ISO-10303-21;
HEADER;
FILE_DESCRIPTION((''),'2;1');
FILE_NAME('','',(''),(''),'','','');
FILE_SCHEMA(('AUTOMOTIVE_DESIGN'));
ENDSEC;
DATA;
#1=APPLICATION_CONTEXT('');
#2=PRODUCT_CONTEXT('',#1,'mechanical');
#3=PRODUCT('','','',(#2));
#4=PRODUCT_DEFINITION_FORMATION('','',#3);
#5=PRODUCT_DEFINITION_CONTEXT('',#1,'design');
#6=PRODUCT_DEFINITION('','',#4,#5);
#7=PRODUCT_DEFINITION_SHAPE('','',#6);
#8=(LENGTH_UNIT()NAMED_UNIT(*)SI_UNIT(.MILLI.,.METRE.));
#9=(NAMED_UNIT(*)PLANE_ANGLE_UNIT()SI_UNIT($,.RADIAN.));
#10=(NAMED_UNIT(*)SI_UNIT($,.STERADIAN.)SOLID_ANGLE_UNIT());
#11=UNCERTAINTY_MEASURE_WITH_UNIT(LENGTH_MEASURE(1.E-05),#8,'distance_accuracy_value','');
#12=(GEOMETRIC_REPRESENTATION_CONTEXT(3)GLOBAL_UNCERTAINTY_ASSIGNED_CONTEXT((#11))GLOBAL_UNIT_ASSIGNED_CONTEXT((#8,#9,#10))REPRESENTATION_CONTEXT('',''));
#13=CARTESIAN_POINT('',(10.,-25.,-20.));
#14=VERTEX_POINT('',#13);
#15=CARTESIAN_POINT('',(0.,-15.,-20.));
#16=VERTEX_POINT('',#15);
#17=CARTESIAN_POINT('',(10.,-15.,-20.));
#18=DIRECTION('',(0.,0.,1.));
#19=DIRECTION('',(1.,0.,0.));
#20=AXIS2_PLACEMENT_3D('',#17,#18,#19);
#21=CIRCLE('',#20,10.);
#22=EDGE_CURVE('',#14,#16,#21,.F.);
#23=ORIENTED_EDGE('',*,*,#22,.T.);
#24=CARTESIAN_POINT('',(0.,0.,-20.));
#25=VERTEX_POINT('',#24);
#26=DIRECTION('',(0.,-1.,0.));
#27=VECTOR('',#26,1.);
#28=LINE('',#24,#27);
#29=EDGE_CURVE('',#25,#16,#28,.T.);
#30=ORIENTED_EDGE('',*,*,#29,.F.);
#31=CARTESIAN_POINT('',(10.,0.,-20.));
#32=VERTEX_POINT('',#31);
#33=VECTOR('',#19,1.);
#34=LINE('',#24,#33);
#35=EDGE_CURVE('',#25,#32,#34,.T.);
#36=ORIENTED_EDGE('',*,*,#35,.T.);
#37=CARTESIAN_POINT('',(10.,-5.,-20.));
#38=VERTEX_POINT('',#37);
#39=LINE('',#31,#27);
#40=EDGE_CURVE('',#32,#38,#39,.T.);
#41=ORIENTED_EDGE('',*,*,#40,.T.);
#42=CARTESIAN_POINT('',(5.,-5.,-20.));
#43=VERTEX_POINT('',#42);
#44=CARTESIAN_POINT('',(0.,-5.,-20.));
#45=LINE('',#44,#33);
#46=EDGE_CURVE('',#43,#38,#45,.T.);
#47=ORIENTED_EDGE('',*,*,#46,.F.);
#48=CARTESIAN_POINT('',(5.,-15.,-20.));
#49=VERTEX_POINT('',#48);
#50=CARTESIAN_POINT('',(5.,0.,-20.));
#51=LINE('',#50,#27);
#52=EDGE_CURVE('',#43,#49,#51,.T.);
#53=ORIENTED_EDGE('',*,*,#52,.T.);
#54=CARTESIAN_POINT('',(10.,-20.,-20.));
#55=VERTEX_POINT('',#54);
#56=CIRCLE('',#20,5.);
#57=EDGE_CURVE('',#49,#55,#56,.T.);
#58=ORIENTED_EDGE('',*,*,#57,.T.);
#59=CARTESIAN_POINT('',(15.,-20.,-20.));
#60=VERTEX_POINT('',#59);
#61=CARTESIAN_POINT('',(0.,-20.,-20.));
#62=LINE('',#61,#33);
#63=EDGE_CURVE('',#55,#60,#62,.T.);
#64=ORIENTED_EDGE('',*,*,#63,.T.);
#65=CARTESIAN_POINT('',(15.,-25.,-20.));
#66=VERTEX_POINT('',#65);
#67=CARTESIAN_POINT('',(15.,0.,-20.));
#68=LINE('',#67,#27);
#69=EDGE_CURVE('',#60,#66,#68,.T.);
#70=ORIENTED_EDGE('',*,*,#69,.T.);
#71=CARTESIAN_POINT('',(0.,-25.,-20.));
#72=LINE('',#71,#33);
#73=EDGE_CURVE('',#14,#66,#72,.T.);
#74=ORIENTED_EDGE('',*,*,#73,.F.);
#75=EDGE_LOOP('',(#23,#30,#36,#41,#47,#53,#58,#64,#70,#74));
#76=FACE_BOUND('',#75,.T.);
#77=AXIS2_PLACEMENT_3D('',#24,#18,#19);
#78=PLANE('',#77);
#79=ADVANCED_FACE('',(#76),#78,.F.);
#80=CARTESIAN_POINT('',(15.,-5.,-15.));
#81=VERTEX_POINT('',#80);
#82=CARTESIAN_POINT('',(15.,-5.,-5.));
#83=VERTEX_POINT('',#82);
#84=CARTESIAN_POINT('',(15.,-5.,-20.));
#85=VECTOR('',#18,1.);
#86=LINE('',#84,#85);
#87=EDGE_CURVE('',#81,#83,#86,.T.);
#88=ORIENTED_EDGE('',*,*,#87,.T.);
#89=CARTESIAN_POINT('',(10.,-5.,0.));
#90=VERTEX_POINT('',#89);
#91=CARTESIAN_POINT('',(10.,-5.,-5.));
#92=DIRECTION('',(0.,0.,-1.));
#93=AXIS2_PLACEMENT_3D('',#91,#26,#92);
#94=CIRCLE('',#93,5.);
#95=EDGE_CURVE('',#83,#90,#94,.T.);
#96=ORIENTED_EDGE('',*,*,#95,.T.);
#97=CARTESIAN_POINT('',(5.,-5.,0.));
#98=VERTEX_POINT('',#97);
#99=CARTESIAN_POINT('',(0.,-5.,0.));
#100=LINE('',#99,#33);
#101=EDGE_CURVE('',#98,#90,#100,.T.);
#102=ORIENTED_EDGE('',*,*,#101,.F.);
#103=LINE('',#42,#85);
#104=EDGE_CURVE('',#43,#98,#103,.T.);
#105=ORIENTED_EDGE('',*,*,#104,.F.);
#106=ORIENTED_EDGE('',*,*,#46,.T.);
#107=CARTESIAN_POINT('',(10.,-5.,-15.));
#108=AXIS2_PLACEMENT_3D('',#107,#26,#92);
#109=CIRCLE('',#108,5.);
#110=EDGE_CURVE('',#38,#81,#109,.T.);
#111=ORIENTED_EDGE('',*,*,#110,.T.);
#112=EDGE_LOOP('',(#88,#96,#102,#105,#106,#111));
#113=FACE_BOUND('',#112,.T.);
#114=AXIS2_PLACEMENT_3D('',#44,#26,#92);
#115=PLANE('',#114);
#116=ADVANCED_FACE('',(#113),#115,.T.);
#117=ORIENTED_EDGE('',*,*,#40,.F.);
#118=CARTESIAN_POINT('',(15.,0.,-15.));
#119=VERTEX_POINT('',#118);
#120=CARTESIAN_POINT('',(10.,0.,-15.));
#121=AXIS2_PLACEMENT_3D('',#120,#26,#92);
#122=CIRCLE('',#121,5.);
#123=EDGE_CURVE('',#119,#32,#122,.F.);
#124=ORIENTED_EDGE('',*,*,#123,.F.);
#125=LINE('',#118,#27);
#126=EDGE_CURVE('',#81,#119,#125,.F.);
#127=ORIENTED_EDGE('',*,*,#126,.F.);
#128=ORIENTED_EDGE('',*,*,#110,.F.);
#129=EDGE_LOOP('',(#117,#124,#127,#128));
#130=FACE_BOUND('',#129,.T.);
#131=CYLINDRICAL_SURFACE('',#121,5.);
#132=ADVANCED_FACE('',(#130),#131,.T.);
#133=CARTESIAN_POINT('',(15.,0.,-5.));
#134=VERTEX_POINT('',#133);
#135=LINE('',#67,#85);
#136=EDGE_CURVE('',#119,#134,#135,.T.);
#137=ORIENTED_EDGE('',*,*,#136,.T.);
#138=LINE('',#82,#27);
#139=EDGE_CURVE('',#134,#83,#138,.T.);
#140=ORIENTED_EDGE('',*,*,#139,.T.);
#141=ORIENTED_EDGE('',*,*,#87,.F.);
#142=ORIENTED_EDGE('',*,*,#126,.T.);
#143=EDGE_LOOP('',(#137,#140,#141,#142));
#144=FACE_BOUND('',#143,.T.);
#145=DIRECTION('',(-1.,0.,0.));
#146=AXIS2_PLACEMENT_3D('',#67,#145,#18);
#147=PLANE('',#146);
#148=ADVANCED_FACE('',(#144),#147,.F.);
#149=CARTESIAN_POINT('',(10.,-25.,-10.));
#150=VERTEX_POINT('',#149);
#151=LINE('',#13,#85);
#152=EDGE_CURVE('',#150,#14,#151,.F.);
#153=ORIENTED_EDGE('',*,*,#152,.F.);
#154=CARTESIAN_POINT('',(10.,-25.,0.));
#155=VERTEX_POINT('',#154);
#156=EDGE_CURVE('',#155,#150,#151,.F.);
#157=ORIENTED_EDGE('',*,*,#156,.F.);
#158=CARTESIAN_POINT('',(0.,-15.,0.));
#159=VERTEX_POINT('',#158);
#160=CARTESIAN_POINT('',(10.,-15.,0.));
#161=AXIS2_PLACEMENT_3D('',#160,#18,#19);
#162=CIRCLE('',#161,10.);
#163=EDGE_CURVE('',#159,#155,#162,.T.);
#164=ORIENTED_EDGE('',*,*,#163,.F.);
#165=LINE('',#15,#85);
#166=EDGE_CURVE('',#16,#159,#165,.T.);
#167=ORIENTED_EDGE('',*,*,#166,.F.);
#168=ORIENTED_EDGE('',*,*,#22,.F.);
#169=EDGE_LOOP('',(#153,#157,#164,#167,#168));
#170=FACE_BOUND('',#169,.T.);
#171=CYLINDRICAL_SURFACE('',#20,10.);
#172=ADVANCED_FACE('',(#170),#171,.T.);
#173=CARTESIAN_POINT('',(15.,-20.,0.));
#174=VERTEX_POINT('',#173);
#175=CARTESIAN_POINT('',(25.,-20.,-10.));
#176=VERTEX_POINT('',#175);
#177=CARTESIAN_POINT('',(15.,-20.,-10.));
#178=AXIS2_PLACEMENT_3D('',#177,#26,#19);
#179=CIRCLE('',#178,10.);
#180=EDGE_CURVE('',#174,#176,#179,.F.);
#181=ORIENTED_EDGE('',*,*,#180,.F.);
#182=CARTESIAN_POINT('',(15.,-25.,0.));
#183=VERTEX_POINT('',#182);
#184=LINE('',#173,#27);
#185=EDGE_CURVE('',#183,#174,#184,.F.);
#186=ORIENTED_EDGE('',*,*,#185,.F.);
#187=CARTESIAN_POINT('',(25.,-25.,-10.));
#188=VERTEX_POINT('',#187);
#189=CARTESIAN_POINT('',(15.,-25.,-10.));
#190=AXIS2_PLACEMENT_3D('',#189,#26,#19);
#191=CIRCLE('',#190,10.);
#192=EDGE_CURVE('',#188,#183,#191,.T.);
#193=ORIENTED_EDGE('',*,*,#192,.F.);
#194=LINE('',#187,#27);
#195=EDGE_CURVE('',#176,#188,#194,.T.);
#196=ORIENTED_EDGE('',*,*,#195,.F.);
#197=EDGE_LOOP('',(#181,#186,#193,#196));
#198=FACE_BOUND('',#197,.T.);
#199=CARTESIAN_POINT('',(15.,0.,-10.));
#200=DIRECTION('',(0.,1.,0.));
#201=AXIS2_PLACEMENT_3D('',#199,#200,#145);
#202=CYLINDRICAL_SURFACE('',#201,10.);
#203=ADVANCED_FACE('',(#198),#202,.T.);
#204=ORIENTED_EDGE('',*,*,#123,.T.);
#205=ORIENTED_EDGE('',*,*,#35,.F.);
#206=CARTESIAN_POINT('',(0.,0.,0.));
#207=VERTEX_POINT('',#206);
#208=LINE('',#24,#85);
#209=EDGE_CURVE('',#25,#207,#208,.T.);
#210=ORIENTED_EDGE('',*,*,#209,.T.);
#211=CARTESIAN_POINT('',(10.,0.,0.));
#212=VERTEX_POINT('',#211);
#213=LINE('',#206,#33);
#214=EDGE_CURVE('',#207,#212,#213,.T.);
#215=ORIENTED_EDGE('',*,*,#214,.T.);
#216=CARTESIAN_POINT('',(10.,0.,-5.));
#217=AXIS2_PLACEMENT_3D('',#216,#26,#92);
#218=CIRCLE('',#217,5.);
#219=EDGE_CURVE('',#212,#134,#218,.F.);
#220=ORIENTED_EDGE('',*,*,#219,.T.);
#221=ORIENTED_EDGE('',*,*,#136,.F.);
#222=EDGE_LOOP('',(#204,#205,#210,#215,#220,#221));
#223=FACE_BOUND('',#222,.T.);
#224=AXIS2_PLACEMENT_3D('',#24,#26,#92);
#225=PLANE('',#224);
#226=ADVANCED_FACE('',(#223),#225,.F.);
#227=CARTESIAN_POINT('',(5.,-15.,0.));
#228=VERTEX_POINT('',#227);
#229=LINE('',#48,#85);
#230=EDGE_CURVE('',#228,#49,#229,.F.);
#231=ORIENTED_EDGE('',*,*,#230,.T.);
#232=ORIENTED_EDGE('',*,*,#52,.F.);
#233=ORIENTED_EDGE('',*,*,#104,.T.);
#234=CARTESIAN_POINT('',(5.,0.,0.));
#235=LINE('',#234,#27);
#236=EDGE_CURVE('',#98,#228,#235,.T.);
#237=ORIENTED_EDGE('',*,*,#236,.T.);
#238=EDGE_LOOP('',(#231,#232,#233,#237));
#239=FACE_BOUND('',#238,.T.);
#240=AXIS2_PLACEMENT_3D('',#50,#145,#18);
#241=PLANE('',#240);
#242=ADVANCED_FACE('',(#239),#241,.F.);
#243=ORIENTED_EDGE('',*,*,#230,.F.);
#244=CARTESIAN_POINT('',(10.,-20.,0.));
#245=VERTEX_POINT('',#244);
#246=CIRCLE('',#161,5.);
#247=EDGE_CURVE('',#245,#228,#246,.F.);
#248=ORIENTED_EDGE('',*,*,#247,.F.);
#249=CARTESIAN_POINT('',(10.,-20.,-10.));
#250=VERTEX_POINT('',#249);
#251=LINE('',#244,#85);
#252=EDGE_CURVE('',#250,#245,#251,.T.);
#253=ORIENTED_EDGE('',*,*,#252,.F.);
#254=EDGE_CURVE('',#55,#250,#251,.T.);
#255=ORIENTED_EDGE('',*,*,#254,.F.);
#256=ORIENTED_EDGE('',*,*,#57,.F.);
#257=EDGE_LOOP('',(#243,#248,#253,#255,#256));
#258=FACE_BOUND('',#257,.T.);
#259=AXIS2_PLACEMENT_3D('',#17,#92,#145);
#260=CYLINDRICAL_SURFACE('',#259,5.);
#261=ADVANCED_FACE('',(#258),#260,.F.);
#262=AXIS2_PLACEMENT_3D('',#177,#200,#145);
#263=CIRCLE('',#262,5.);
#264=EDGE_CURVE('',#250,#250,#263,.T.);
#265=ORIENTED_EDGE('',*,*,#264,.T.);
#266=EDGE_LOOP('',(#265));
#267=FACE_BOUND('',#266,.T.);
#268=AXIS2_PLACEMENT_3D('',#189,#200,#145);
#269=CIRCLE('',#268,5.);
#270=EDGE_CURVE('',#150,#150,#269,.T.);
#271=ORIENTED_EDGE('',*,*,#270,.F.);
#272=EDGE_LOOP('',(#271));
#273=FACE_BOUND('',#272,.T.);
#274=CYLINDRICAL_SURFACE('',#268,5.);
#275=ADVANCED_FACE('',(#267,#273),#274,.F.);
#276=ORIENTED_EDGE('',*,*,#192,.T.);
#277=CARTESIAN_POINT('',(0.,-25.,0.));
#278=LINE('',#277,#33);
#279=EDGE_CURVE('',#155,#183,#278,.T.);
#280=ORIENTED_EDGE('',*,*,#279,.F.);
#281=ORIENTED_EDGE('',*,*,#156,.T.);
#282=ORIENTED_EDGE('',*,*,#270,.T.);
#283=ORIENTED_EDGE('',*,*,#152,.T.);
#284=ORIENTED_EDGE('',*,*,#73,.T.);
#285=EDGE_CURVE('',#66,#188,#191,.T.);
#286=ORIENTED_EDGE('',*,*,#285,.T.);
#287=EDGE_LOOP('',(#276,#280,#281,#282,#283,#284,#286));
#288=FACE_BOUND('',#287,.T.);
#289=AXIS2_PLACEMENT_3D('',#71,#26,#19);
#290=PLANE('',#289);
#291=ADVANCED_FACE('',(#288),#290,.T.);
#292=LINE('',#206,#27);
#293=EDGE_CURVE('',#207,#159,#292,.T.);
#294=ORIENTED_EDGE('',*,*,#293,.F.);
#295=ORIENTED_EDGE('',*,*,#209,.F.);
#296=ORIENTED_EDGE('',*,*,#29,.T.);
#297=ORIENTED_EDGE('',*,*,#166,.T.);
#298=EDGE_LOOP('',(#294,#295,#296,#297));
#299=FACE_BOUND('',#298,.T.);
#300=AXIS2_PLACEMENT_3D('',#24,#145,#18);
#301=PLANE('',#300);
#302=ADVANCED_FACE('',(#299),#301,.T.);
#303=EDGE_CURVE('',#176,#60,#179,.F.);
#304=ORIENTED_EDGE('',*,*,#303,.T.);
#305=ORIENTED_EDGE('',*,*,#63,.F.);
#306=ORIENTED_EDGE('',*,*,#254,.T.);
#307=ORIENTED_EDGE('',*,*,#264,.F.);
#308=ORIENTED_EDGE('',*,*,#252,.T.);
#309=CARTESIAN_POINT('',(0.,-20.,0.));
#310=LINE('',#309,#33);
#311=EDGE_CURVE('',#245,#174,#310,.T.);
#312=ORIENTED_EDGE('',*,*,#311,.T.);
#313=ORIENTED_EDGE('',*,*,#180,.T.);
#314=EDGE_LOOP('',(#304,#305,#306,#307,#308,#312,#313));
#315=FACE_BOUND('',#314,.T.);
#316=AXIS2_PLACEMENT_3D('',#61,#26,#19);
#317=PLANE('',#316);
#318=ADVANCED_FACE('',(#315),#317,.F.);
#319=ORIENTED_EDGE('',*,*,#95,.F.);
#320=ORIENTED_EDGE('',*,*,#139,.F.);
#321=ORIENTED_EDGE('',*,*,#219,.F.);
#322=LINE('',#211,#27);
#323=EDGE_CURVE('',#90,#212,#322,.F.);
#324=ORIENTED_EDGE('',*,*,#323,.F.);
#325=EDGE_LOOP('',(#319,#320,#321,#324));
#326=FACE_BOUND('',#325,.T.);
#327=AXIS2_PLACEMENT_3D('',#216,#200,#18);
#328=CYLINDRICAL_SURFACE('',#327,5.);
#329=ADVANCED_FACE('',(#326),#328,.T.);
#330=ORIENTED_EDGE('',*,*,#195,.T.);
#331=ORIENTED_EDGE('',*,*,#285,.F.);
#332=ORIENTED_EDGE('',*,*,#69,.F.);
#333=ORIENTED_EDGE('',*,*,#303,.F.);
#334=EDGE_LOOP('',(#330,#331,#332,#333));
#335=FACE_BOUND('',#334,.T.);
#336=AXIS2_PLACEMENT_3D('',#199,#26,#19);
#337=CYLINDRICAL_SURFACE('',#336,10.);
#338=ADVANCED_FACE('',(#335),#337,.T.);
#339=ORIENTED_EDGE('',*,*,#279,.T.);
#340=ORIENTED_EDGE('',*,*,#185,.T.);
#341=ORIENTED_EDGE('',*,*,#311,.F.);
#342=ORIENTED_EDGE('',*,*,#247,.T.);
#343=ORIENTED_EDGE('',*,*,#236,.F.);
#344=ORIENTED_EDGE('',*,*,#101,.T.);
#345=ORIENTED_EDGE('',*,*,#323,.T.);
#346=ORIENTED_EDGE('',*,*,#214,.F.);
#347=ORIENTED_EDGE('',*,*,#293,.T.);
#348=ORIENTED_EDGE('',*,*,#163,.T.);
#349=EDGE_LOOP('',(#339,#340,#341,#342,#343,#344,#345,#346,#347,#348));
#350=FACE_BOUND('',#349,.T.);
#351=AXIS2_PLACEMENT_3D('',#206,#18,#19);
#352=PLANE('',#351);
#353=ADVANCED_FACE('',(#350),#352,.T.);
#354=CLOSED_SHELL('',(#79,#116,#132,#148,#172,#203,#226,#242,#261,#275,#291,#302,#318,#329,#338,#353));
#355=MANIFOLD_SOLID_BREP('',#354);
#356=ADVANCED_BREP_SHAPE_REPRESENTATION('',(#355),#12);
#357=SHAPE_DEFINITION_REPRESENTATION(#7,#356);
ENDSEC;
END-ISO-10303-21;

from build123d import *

# Parameters (mm, degrees)
SKETCH_2_W          = 5
SKETCH_2_H          = 5
SKETCH_2_W_2        = 10
SKETCH_2_H_2        = 15
EXTRUDE_1_DEPTH     = 20
FILLET_1_R          = 10
FILLET_2_R          = 5
SKETCH_3_R          = 5
CUT_EXTRUDE_1_DEPTH = 38.749172176


with BuildPart() as part:
    # 草圖2 → 填料-伸長1 (new body)
    with BuildSketch(Plane.XY):
        with Locations((2.5, -2.5)):
            Rectangle(SKETCH_2_W, SKETCH_2_H)
        with Locations((10, -2.5)):
            Rectangle(SKETCH_2_W_2, SKETCH_2_H)
        with Locations((2.5, -12.5)):
            Rectangle(SKETCH_2_W, SKETCH_2_H_2)
        Polygon((5, -20), (0, -20), (0, -25), (25, -25), (25, -20), align=None)
    extrude(amount=-EXTRUDE_1_DEPTH)

    # 圓角1
    fillet_1_edges = [part.edges().sort_by_distance(p)[0] for p in [
        (25, -22.5, 0),
        (25, -22.5, -20),
        (0, -25, -10),
    ]]
    fillet(fillet_1_edges, radius=FILLET_1_R - 0.0001)  # a hair under: the kernel refuses the full size

    # 圓角2
    fillet_2_edges = [part.edges().sort_by_distance(p)[0] for p in [
        (15, -2.5, -20),
        (15, -2.5, 0),
        (5, -20, -10),
    ]]
    fillet(fillet_2_edges, radius=FILLET_2_R)

    # 草圖3 → 除料-伸長1 (cut, through all)
    with BuildSketch(Plane(origin=(0, -20, 0), x_dir=(1, 0, 0), z_dir=(0, 1, 0))):
        with Locations(Location((15, 10, 0), (0, 0, 180))):
            Circle(SKETCH_3_R)
    extrude(amount=-CUT_EXTRUDE_1_DEPTH, mode=Mode.SUBTRACT)


solid = part.part
